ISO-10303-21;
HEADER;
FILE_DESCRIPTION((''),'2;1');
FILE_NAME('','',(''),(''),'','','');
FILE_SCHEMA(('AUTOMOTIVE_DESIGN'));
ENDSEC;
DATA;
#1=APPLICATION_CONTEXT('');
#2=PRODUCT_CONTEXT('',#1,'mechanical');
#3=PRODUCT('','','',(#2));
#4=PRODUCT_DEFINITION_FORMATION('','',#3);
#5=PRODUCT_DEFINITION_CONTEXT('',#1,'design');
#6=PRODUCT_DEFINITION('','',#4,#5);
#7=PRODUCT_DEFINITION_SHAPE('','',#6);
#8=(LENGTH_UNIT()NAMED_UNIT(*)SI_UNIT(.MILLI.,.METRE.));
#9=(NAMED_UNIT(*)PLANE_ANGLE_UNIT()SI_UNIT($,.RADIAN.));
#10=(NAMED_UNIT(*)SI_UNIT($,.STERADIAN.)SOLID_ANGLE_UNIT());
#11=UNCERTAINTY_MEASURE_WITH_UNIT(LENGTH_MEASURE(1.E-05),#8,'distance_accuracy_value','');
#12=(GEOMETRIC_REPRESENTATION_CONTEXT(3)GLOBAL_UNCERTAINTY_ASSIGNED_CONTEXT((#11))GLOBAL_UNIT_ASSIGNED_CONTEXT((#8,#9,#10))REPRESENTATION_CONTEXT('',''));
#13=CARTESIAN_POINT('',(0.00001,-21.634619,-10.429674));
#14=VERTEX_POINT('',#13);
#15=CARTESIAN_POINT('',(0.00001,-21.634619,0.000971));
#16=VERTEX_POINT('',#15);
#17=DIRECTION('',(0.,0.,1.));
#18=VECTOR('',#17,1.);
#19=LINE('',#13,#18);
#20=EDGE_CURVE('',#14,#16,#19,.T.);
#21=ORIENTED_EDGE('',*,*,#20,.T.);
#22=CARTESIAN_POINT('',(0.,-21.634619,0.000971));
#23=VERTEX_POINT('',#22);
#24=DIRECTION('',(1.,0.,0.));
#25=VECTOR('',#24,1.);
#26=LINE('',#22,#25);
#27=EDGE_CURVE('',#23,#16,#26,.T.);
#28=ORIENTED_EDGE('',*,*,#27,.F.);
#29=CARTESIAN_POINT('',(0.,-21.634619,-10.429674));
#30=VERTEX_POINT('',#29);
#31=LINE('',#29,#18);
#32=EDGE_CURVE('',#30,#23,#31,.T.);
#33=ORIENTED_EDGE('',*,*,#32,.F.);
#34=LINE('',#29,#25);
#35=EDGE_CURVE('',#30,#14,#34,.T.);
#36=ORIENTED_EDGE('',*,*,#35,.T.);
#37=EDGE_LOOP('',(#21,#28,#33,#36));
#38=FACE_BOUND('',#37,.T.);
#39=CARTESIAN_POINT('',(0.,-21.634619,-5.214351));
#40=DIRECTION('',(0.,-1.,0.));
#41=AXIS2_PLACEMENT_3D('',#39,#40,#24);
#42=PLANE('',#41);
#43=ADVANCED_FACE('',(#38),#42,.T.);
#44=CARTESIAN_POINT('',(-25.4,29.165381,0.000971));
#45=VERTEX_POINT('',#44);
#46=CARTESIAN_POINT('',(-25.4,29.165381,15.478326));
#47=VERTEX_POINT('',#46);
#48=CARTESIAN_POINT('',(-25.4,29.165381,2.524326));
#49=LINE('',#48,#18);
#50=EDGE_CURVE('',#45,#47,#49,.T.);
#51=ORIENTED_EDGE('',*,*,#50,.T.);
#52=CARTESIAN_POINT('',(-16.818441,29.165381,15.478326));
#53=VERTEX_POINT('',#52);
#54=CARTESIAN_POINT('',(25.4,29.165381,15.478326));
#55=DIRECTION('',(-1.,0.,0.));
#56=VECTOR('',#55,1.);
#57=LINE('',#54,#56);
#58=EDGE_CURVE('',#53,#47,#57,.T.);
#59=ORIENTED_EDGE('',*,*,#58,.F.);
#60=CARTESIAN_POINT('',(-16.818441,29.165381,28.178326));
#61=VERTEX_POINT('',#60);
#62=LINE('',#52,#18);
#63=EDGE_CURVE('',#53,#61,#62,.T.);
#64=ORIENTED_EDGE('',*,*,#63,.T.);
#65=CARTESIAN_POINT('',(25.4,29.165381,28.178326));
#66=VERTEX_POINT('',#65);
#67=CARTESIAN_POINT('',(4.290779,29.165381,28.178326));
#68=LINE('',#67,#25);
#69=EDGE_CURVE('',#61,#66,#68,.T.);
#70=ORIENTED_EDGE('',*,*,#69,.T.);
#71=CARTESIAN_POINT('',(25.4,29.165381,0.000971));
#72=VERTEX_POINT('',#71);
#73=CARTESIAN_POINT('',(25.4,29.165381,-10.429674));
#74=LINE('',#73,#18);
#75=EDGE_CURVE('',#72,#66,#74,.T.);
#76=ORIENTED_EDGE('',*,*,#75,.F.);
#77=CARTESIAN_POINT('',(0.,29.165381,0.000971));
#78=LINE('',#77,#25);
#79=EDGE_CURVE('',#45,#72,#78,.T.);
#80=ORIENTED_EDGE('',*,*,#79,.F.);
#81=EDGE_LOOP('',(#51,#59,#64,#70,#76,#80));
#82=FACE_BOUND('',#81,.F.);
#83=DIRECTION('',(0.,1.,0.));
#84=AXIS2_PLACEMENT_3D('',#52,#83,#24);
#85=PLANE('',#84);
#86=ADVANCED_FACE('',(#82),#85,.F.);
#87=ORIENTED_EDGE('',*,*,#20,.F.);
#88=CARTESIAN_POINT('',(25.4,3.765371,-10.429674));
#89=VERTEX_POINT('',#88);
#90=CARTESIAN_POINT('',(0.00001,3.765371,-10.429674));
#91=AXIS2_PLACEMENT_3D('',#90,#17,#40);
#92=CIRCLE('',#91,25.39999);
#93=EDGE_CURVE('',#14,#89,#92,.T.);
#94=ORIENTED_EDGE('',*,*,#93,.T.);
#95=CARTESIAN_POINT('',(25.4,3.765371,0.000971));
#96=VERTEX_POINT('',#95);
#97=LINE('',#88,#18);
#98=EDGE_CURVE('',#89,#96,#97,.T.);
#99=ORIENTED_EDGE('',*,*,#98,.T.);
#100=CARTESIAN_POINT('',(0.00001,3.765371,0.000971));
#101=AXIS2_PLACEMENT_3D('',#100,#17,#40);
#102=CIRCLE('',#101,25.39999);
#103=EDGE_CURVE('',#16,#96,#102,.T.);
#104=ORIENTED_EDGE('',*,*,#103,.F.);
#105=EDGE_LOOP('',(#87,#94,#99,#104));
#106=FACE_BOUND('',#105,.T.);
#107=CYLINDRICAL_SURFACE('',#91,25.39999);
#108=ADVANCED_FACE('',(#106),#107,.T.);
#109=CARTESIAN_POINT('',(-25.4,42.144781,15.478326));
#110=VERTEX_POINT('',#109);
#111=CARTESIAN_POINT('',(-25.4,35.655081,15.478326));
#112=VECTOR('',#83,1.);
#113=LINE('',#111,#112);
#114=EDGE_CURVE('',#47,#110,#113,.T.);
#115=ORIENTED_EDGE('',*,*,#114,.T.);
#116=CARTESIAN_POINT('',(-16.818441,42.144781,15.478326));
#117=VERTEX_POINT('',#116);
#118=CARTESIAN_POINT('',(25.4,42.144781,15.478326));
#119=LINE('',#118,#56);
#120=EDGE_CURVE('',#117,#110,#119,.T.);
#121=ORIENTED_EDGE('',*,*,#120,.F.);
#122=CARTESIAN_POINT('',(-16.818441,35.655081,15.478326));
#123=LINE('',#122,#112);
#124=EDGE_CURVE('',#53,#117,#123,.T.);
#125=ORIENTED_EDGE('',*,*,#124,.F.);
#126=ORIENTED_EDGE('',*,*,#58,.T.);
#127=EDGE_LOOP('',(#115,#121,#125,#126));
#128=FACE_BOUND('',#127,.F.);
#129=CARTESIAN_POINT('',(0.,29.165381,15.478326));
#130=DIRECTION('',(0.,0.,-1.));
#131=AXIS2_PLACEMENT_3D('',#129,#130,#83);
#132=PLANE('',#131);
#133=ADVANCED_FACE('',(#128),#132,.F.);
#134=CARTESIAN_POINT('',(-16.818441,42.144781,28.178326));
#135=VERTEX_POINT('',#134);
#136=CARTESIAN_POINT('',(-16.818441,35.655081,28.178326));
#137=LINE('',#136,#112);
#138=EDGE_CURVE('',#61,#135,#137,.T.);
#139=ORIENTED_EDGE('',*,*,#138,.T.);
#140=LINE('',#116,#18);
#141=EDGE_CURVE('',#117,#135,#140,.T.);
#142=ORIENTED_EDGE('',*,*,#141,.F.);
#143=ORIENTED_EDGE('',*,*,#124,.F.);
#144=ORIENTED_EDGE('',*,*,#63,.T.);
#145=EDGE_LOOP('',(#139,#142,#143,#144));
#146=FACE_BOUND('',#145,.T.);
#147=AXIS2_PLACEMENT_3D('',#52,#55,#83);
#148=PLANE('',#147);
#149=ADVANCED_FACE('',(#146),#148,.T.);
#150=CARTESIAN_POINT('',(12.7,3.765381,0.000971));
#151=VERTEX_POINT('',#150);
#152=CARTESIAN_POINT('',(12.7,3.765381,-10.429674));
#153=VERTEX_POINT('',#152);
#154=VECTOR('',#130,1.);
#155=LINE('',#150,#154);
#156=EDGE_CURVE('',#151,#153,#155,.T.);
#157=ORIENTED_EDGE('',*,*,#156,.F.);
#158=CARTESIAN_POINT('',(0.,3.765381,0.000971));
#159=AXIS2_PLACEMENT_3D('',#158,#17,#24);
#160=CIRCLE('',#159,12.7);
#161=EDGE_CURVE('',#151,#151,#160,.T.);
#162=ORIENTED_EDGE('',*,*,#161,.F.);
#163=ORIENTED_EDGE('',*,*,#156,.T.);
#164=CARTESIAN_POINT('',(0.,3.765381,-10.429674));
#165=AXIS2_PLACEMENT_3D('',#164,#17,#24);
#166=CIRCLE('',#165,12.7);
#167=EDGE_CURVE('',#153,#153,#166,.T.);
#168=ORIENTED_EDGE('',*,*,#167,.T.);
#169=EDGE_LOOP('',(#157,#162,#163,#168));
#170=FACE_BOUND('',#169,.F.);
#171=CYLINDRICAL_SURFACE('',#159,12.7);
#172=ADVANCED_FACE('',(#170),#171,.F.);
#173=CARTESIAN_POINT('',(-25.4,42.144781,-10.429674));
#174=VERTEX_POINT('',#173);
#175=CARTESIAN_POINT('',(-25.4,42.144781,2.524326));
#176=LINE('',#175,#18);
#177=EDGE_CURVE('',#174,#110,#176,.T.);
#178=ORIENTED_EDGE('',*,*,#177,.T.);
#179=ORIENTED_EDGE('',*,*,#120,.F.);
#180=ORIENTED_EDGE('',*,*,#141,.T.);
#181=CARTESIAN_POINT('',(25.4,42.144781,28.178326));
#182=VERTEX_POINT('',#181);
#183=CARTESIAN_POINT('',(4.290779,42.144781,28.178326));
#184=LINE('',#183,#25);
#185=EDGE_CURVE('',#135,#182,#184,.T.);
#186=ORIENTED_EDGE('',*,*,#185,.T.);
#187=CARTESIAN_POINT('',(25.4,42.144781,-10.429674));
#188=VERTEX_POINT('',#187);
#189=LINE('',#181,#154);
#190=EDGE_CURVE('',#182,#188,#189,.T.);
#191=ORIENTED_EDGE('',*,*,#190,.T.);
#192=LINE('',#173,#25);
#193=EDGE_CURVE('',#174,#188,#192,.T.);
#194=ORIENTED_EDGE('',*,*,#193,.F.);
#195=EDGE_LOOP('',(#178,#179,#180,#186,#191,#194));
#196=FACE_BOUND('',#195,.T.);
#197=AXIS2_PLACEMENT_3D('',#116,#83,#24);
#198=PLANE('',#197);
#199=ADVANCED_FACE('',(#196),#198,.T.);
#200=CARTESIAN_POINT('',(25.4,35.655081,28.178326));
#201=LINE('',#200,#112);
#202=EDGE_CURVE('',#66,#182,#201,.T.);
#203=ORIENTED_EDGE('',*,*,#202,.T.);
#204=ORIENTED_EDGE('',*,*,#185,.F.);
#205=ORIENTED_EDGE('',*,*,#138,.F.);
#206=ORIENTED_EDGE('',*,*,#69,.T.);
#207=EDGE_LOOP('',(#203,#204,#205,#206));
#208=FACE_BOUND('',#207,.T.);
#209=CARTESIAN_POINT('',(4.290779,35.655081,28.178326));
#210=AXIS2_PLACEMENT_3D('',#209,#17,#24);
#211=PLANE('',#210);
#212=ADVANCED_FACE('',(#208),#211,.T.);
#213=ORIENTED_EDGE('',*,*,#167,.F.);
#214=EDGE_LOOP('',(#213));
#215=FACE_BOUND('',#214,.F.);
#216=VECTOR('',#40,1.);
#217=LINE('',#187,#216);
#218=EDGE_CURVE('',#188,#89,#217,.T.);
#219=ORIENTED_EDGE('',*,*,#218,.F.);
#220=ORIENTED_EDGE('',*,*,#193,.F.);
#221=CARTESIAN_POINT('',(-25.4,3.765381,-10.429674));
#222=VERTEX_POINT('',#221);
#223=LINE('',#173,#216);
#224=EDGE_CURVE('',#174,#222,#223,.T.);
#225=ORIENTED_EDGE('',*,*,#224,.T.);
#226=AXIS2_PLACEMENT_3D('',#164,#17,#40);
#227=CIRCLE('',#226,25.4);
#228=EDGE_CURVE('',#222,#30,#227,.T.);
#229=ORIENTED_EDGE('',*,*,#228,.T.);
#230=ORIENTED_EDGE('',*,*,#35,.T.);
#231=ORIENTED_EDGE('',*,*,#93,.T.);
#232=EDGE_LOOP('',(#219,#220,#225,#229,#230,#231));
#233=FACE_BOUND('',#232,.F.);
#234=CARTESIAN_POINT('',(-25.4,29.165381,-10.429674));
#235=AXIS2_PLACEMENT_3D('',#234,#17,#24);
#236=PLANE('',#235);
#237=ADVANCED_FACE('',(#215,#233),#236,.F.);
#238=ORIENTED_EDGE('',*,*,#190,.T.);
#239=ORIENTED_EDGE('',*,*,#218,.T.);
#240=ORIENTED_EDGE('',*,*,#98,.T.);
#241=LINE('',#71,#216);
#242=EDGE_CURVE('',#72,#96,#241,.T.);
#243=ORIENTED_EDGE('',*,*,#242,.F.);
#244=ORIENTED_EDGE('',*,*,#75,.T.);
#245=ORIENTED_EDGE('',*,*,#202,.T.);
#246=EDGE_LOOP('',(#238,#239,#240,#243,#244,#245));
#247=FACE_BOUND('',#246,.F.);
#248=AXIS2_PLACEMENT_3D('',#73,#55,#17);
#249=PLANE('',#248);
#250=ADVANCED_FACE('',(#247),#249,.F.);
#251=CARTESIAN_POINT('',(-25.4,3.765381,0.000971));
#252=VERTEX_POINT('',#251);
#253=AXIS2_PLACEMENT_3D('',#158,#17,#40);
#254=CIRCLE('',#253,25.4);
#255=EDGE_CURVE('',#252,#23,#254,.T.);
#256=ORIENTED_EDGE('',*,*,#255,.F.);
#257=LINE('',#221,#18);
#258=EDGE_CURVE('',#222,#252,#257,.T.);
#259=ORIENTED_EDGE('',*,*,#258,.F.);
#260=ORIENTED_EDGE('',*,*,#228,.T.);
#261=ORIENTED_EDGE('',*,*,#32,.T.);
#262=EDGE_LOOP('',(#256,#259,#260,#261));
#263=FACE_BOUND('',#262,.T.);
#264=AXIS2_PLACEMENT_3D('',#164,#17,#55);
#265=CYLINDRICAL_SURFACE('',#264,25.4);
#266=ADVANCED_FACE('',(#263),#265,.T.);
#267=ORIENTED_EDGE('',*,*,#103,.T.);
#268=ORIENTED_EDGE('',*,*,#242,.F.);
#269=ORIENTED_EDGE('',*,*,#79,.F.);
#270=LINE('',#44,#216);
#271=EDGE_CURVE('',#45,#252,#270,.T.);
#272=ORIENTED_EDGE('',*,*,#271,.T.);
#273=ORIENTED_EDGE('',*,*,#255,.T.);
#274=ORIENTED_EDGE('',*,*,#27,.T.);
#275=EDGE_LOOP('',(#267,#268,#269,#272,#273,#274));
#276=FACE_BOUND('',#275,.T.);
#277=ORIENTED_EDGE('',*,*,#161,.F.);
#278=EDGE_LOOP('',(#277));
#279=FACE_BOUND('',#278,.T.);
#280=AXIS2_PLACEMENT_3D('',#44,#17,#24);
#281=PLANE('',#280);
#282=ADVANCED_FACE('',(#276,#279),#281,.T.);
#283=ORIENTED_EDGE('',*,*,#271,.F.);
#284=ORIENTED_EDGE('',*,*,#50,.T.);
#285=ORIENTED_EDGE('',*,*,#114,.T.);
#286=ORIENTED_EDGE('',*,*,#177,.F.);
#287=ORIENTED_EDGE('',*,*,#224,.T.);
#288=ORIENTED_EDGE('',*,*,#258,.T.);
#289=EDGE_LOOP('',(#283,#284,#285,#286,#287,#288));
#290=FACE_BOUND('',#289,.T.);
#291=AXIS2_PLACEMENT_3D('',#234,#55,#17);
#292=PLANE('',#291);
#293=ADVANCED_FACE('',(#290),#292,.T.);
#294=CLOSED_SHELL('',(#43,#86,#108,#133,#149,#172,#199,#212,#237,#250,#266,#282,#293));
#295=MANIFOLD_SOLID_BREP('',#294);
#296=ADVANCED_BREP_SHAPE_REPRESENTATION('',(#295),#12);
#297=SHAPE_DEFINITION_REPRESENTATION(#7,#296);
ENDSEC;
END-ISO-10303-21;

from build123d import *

# Parameters (mm, degrees)
F0_W     = 12.9794
F0_H     = 25.908
F1_DEPTH = 25.4
F2_W     = 42.2184414506
F2_H     = 12.9794
F3_DEPTH = 12.7
F4_W     = 50.8
F4_H     = 10.4306445336
F5_DEPTH = 50.8
F6_R     = 12.7
F7_DEPTH = 10.4316445336
F8_R     = 25.4
F9_R     = 25.39999


# Not quite as in the source:
# - a fillet or chamfer is up to 0.001 mm smaller than in the source, because OpenCascade refuses the exact size


with BuildPart() as f1:
    # F0 (on Right) → F1 (new body, symmetric)
    with BuildSketch(Plane.YZ):
        with Locations((35.6550812721, 2.5243262509)):
            Rectangle(F0_W, F0_H)
    extrude(amount=F1_DEPTH, both=True)

    # F2 (on face) → F3 (join)
    with BuildSketch(Plane.XY.offset(15.4783262509)):
        with Locations((4.2907792747, 35.6550812721)):
            Rectangle(F2_W, F2_H)
    extrude(amount=F3_DEPTH)

    # F4 (on face) → F5 (join)
    with BuildSketch(Plane.XZ.offset(-29.1653812721)):
        with Locations((0, -5.2143514823)):
            Rectangle(F4_W, F4_H)
    extrude(amount=F5_DEPTH)

    # F6 (on face) → F7 (cut, through all)
    with BuildSketch(Plane.XY.offset(0.0009707845)):
        with Locations((0, 3.7653812721)):
            Circle(F6_R)
    extrude(amount=-F7_DEPTH, mode=Mode.SUBTRACT)

    # F8
    f8_edges = [f1.edges().sort_by_distance(p)[0] for p in [
        (-25.4, -21.634619, -5.214351),
    ]]
    fillet(f8_edges, radius=F8_R)

    # F9 (radius 25.4 in the source; OpenCascade refuses exactly that, so slightly less here)
    f9_edges = [f1.edges().sort_by_distance(p)[0] for p in [
        (25.4, -21.634619, -5.214351),
    ]]
    fillet(f9_edges, radius=F9_R)


solid = f1.part
